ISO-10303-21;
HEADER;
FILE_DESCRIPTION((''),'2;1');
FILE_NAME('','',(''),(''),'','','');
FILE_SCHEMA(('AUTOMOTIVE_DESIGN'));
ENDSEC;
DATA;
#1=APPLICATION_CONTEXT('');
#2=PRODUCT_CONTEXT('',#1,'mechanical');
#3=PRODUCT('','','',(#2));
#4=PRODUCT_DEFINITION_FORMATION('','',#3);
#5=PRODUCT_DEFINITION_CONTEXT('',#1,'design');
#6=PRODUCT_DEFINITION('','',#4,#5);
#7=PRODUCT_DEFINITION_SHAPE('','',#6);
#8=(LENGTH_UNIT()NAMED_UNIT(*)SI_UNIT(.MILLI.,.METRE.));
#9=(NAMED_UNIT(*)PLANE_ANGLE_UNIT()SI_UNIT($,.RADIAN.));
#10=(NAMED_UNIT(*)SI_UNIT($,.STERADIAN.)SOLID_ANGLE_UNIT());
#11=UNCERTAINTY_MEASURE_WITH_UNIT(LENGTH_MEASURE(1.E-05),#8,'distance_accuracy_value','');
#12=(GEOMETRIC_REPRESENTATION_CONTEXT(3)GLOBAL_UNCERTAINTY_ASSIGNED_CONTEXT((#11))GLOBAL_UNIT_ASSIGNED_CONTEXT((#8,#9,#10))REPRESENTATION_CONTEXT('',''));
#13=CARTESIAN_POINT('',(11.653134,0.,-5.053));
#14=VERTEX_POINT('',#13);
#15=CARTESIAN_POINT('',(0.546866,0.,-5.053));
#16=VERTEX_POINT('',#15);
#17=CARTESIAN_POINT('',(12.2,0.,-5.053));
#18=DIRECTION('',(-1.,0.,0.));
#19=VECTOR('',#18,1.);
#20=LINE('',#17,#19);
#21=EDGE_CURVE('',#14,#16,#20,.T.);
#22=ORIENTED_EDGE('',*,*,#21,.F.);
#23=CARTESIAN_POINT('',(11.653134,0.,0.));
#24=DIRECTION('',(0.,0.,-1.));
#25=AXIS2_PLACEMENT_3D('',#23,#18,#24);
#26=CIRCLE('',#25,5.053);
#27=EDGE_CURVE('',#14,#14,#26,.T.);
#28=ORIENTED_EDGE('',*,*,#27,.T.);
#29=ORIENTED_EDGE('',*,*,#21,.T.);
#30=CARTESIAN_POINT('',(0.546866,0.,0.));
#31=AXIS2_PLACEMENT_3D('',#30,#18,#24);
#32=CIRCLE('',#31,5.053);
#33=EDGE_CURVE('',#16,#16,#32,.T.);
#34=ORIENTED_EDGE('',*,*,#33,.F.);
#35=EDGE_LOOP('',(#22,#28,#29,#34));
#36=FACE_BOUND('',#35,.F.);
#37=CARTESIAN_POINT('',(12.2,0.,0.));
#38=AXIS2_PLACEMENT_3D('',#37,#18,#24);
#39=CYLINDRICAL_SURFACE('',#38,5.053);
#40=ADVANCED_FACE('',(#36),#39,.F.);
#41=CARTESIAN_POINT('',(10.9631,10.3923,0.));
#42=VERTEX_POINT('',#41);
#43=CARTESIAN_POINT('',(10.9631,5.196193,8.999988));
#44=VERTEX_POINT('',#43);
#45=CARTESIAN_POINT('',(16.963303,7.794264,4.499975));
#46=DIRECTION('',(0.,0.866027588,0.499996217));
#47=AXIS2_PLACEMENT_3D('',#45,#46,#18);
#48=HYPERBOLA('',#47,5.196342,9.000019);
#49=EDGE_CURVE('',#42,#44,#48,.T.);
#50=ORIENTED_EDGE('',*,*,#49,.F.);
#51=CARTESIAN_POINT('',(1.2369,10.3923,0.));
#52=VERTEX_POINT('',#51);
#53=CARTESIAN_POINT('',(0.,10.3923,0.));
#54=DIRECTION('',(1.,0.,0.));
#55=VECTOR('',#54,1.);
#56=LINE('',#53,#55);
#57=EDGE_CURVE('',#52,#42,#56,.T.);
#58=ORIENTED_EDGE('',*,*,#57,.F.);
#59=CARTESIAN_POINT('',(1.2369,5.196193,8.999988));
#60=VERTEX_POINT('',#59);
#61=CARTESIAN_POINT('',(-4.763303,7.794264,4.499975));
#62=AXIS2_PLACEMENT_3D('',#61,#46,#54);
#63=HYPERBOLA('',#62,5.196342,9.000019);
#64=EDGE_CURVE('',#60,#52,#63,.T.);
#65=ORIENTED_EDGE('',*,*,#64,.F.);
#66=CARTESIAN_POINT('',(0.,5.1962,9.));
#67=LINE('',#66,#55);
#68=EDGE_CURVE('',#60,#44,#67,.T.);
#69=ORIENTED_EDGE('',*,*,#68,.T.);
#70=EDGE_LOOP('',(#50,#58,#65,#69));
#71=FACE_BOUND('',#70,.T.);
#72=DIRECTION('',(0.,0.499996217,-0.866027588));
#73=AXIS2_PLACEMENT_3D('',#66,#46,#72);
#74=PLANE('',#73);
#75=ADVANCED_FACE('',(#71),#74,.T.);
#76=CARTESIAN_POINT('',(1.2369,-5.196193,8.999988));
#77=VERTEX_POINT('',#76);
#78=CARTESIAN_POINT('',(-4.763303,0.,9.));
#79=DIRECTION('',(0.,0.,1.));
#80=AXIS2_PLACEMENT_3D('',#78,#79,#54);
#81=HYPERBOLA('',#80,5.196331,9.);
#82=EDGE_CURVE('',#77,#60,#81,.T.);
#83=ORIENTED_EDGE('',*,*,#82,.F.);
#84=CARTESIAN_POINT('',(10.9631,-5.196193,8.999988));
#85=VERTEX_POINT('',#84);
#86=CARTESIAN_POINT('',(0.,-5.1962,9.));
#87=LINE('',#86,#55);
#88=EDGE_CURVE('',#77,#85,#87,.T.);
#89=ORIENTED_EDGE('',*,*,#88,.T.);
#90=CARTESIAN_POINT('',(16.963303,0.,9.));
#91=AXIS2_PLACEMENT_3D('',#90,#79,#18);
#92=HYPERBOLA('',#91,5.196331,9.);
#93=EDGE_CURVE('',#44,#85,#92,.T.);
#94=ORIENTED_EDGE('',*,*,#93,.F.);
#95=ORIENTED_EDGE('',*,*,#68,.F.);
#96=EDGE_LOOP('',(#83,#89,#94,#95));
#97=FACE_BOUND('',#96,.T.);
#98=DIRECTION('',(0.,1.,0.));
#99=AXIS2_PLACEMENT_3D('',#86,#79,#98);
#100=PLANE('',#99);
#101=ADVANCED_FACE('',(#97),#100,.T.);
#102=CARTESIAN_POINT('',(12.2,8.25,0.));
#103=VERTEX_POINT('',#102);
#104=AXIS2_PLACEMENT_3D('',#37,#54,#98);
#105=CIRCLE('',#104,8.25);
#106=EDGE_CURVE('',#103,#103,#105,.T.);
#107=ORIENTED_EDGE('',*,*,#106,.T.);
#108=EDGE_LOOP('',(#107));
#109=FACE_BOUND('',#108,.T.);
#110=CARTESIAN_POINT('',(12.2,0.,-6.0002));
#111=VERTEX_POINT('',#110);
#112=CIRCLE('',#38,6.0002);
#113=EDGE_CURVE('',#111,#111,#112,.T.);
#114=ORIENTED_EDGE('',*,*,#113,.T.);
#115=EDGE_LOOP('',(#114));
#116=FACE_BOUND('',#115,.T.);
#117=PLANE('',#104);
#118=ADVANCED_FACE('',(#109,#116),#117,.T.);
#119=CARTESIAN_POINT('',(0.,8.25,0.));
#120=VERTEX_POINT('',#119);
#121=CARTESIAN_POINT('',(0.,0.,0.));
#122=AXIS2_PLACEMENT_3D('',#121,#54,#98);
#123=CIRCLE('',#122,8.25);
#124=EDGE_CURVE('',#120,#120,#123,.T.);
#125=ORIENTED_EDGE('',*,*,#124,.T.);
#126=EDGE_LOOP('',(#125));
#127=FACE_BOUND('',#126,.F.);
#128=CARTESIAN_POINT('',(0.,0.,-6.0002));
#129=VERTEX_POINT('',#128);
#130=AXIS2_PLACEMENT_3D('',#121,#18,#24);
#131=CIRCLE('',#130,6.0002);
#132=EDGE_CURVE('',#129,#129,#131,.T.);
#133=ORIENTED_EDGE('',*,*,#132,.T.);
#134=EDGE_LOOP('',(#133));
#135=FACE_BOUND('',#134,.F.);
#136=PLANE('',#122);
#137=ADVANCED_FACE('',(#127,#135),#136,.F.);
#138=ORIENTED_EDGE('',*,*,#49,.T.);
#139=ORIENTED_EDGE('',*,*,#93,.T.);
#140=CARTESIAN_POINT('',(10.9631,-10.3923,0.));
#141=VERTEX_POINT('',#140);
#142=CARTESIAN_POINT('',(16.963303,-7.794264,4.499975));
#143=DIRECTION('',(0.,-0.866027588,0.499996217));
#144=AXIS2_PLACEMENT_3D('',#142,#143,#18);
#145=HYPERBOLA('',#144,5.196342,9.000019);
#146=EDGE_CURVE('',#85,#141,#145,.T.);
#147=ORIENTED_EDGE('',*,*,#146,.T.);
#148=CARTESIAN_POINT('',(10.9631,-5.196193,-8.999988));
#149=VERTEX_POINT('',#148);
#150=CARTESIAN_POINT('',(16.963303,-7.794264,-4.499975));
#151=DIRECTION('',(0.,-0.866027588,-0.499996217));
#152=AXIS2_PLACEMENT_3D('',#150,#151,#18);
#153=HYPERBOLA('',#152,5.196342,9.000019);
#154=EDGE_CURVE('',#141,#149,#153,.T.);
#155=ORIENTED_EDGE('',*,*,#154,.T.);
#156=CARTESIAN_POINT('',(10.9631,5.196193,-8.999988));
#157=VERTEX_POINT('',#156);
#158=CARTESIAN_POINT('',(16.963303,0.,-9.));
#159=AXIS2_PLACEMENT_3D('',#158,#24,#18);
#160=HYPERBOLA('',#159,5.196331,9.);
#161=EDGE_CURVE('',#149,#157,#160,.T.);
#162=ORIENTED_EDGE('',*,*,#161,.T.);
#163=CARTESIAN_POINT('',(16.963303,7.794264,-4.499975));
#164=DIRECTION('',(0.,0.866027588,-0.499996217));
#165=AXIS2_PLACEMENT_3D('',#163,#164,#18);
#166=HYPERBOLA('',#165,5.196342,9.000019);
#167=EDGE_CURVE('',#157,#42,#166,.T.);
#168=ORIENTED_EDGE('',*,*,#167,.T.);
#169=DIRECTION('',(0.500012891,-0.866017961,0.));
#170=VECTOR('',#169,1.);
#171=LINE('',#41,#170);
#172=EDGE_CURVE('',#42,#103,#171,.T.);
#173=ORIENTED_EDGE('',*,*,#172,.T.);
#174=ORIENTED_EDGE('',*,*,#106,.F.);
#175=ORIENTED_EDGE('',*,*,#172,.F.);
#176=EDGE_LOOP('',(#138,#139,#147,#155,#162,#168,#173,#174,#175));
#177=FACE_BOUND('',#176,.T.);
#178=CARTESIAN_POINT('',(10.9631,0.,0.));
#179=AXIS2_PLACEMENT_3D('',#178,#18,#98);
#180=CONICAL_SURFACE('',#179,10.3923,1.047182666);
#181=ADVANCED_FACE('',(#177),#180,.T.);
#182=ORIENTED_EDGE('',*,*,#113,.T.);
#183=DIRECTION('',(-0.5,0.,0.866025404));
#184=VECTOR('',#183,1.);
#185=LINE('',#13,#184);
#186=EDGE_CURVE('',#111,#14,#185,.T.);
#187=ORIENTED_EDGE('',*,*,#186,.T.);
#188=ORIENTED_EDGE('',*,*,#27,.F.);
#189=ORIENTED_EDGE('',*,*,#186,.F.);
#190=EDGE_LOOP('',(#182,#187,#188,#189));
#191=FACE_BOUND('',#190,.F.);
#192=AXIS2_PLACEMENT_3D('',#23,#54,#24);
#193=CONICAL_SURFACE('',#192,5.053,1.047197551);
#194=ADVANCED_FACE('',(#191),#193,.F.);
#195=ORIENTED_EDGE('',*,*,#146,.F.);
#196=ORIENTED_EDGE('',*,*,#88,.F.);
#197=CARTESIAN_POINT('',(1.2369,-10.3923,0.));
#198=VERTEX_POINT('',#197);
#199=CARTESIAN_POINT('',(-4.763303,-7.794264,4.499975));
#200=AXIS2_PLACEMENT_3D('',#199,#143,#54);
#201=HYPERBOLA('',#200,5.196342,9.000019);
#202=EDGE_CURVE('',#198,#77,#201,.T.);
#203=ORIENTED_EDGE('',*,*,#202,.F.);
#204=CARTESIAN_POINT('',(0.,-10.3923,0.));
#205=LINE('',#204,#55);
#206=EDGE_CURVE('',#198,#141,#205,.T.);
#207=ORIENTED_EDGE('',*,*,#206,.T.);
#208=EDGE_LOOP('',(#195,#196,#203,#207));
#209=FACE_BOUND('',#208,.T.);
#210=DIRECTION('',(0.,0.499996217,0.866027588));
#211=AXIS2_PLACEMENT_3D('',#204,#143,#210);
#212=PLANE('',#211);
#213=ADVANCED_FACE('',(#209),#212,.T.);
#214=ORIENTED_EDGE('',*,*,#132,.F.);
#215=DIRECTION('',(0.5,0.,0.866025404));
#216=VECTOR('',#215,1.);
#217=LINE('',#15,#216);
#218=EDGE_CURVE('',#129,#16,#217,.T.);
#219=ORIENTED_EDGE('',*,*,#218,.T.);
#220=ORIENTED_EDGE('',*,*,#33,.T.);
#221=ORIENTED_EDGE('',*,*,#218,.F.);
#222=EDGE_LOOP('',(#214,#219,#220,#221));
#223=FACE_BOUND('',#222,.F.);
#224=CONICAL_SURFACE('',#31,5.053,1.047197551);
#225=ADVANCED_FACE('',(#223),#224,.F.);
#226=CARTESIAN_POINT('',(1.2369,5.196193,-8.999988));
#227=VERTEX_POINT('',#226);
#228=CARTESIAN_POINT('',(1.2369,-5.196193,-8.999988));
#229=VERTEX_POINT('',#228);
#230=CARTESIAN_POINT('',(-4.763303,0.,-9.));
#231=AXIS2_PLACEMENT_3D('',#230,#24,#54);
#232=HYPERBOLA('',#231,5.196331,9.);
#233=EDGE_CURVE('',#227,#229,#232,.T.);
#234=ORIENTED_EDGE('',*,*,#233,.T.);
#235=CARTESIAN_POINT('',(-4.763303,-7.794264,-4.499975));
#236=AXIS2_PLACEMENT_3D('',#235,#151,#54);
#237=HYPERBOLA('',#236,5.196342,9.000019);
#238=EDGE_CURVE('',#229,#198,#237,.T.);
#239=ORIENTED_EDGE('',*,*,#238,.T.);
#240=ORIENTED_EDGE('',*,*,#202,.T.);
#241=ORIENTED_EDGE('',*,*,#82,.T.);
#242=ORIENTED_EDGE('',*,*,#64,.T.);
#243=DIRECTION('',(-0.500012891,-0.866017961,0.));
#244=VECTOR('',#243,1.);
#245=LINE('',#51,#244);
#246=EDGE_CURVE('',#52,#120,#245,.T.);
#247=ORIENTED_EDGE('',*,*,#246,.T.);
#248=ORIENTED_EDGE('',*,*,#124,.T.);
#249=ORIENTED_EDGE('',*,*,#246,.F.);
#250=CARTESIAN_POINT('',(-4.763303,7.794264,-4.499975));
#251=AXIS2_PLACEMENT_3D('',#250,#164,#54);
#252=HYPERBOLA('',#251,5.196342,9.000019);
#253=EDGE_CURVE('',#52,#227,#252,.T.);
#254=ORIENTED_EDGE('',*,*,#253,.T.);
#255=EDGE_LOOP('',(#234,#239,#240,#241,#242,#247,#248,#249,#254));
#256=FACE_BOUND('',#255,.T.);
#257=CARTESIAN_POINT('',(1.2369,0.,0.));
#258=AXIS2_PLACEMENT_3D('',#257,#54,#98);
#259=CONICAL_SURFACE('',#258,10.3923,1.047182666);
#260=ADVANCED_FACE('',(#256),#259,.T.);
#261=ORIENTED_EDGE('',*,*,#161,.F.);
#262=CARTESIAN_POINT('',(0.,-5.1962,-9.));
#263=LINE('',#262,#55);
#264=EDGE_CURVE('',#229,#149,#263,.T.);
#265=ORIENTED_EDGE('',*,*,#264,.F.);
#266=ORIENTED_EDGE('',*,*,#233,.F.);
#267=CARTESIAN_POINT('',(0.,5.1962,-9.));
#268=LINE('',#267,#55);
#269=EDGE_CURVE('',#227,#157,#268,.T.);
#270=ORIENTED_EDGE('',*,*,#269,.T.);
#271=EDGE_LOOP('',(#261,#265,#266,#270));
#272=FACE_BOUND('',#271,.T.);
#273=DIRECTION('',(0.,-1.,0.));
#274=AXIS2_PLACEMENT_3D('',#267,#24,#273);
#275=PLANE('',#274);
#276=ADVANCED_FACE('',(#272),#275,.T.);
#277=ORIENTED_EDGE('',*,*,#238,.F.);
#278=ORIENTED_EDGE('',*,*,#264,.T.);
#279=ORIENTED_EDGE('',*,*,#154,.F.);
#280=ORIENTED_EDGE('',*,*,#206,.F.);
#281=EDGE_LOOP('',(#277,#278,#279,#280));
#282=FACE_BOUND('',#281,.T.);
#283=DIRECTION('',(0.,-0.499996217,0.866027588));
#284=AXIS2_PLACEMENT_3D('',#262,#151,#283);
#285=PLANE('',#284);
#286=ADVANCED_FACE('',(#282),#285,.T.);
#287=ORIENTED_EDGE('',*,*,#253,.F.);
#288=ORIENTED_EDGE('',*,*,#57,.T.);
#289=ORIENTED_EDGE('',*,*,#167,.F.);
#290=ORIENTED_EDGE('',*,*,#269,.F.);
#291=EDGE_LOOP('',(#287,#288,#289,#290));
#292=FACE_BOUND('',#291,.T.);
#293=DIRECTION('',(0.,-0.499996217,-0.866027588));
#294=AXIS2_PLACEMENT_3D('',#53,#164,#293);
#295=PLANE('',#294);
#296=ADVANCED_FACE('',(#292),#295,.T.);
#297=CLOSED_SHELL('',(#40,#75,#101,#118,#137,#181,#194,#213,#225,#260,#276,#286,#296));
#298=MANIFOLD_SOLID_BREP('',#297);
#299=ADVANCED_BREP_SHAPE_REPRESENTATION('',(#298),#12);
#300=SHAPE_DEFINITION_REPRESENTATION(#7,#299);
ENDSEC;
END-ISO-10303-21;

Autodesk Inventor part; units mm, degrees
ref_plane "YZ Plane" through (0, 0, 0) normal (1, 0, 0) x (0, 1, 0)
ref_plane "XZ Plane" through (0, 0, 0) normal (0, 1, 0) x (-1, 0, 0)
sketch "Szkic1" plane through (0, 0, 0) normal (1, 0, 0) x (0, 1, 0)
  line L0 (-10.3923, 0) -> (-5.1962, 9)
  line L1 (-5.1962, 9) -> (5.1962, 9)
  line L2 (5.1962, 9) -> (10.3923, 0)
  line L3 (10.3923, 0) -> (5.1962, -9)
  line L4 (5.1962, -9) -> (-5.1962, -9)
  line L5 (-5.1962, -9) -> (-10.3923, 0)
  point P0 (0, 0)
  point P1 (0, 0)
  dimension "d0" = 20.7846
extrude "Bryła" add sketch "Szkic1" along normal blind 12.2
sketch "Szkic2" plane through (0, 0, 0) normal (0, 0, 1) x (1, 0, 0)
  line L0 (0, 5.1962) -> (0, 10.3923) projected
  line L1 (0, 10.3923) -> (12.2, 10.3923) projected
  line L2 (12.2, 5.1962) -> (12.2, 10.3923) projected
  line L3 (-2.44, 0) -> (14.64, 0) projected
  line L4 (1.2369, 10.3923) -> (0, 8.25)
  line L5 (10.9631, 10.3923) -> (12.2, 8.25)
  dimension "d3" = 30
  dimension "d4" = 30
  dimension "d5" = 16.5
  dimension "d6" = 16.5
revolve "Faza1" cut sketch "Szkic2" angle 360 about axis through (-10, 0, 0) along (1, 0, 0)
sketch "Szkic3" plane through (12.2, 0, 0) normal (1, 0, 0) x (0, 0, -1)
  arc A0 (-0.625, -1.0825) -> (0.625, -1.0825) centre (0, 0) ccw projected
hole "Gwint" at (12.2, 0, 0) direction (-1, 0, 0) diameter 10.106 end through all thread size "M12x1.75" class "6H" standard "ISO Metric profile"
chamfer "Faza2" distance 0.9472 angle 30 1 edges at (12.2, 0, 5.053) measured on face at (12.2, 7.0921, -0.8611)
chamfer "Faza3" distance 0.9472 angle 30 1 edges at (0, 0, 5.053) measured on face at (0, 7.0921, -0.8611)
ref_plane "Work Plane1" through (-18.0978, 0, 0) normal (0, -0.8660254, -0.5) x (1, 0, 0)
equation "\"d0\" = 1.1547 * SW"
equation "\"d1\" = KOH"
equation "\"d3\" = ANG1"
equation "\"d4\" = ANG2"
equation "\"d5\" = SW0"
equation "\"d6\" = SW01"
equation "\"d8\" = -0.5 * GD1 + 0.5 * NND"
equation "\"d40\" = -0.5 * GD1 + 0.5 * NND"
equation "\"d10\" = -0.5 * GD1 + 0.5 * NND"
equation "\"d41\" = -0.5 * GD1 + 0.5 * NND"
equation "\"ANG1\" = 30deg"
equation "\"ANG2\" = 30deg"
equation "\"NND\" = 12"
equation "\"KOH\" = 12.2"
equation "\"SW\" = 18"
equation "\"SW0\" = 16.5"
equation "\"SW01\" = SW0"
equation "\"GUL\" = 0.541266 * PTC"
equation "\"THREADDIA\" = 12"
equation "\"TOA\" = 30deg"
equation "\"PTC\" = 1.75"
equation "\"E0\" = 1.155 * SW"
equation "\"GAL\" = 0.541266 * PTC"
equation "\"GD1\" = 10.105569"
properties part number "ISO 4034 - M12" material "Aluminium AW-7020"
